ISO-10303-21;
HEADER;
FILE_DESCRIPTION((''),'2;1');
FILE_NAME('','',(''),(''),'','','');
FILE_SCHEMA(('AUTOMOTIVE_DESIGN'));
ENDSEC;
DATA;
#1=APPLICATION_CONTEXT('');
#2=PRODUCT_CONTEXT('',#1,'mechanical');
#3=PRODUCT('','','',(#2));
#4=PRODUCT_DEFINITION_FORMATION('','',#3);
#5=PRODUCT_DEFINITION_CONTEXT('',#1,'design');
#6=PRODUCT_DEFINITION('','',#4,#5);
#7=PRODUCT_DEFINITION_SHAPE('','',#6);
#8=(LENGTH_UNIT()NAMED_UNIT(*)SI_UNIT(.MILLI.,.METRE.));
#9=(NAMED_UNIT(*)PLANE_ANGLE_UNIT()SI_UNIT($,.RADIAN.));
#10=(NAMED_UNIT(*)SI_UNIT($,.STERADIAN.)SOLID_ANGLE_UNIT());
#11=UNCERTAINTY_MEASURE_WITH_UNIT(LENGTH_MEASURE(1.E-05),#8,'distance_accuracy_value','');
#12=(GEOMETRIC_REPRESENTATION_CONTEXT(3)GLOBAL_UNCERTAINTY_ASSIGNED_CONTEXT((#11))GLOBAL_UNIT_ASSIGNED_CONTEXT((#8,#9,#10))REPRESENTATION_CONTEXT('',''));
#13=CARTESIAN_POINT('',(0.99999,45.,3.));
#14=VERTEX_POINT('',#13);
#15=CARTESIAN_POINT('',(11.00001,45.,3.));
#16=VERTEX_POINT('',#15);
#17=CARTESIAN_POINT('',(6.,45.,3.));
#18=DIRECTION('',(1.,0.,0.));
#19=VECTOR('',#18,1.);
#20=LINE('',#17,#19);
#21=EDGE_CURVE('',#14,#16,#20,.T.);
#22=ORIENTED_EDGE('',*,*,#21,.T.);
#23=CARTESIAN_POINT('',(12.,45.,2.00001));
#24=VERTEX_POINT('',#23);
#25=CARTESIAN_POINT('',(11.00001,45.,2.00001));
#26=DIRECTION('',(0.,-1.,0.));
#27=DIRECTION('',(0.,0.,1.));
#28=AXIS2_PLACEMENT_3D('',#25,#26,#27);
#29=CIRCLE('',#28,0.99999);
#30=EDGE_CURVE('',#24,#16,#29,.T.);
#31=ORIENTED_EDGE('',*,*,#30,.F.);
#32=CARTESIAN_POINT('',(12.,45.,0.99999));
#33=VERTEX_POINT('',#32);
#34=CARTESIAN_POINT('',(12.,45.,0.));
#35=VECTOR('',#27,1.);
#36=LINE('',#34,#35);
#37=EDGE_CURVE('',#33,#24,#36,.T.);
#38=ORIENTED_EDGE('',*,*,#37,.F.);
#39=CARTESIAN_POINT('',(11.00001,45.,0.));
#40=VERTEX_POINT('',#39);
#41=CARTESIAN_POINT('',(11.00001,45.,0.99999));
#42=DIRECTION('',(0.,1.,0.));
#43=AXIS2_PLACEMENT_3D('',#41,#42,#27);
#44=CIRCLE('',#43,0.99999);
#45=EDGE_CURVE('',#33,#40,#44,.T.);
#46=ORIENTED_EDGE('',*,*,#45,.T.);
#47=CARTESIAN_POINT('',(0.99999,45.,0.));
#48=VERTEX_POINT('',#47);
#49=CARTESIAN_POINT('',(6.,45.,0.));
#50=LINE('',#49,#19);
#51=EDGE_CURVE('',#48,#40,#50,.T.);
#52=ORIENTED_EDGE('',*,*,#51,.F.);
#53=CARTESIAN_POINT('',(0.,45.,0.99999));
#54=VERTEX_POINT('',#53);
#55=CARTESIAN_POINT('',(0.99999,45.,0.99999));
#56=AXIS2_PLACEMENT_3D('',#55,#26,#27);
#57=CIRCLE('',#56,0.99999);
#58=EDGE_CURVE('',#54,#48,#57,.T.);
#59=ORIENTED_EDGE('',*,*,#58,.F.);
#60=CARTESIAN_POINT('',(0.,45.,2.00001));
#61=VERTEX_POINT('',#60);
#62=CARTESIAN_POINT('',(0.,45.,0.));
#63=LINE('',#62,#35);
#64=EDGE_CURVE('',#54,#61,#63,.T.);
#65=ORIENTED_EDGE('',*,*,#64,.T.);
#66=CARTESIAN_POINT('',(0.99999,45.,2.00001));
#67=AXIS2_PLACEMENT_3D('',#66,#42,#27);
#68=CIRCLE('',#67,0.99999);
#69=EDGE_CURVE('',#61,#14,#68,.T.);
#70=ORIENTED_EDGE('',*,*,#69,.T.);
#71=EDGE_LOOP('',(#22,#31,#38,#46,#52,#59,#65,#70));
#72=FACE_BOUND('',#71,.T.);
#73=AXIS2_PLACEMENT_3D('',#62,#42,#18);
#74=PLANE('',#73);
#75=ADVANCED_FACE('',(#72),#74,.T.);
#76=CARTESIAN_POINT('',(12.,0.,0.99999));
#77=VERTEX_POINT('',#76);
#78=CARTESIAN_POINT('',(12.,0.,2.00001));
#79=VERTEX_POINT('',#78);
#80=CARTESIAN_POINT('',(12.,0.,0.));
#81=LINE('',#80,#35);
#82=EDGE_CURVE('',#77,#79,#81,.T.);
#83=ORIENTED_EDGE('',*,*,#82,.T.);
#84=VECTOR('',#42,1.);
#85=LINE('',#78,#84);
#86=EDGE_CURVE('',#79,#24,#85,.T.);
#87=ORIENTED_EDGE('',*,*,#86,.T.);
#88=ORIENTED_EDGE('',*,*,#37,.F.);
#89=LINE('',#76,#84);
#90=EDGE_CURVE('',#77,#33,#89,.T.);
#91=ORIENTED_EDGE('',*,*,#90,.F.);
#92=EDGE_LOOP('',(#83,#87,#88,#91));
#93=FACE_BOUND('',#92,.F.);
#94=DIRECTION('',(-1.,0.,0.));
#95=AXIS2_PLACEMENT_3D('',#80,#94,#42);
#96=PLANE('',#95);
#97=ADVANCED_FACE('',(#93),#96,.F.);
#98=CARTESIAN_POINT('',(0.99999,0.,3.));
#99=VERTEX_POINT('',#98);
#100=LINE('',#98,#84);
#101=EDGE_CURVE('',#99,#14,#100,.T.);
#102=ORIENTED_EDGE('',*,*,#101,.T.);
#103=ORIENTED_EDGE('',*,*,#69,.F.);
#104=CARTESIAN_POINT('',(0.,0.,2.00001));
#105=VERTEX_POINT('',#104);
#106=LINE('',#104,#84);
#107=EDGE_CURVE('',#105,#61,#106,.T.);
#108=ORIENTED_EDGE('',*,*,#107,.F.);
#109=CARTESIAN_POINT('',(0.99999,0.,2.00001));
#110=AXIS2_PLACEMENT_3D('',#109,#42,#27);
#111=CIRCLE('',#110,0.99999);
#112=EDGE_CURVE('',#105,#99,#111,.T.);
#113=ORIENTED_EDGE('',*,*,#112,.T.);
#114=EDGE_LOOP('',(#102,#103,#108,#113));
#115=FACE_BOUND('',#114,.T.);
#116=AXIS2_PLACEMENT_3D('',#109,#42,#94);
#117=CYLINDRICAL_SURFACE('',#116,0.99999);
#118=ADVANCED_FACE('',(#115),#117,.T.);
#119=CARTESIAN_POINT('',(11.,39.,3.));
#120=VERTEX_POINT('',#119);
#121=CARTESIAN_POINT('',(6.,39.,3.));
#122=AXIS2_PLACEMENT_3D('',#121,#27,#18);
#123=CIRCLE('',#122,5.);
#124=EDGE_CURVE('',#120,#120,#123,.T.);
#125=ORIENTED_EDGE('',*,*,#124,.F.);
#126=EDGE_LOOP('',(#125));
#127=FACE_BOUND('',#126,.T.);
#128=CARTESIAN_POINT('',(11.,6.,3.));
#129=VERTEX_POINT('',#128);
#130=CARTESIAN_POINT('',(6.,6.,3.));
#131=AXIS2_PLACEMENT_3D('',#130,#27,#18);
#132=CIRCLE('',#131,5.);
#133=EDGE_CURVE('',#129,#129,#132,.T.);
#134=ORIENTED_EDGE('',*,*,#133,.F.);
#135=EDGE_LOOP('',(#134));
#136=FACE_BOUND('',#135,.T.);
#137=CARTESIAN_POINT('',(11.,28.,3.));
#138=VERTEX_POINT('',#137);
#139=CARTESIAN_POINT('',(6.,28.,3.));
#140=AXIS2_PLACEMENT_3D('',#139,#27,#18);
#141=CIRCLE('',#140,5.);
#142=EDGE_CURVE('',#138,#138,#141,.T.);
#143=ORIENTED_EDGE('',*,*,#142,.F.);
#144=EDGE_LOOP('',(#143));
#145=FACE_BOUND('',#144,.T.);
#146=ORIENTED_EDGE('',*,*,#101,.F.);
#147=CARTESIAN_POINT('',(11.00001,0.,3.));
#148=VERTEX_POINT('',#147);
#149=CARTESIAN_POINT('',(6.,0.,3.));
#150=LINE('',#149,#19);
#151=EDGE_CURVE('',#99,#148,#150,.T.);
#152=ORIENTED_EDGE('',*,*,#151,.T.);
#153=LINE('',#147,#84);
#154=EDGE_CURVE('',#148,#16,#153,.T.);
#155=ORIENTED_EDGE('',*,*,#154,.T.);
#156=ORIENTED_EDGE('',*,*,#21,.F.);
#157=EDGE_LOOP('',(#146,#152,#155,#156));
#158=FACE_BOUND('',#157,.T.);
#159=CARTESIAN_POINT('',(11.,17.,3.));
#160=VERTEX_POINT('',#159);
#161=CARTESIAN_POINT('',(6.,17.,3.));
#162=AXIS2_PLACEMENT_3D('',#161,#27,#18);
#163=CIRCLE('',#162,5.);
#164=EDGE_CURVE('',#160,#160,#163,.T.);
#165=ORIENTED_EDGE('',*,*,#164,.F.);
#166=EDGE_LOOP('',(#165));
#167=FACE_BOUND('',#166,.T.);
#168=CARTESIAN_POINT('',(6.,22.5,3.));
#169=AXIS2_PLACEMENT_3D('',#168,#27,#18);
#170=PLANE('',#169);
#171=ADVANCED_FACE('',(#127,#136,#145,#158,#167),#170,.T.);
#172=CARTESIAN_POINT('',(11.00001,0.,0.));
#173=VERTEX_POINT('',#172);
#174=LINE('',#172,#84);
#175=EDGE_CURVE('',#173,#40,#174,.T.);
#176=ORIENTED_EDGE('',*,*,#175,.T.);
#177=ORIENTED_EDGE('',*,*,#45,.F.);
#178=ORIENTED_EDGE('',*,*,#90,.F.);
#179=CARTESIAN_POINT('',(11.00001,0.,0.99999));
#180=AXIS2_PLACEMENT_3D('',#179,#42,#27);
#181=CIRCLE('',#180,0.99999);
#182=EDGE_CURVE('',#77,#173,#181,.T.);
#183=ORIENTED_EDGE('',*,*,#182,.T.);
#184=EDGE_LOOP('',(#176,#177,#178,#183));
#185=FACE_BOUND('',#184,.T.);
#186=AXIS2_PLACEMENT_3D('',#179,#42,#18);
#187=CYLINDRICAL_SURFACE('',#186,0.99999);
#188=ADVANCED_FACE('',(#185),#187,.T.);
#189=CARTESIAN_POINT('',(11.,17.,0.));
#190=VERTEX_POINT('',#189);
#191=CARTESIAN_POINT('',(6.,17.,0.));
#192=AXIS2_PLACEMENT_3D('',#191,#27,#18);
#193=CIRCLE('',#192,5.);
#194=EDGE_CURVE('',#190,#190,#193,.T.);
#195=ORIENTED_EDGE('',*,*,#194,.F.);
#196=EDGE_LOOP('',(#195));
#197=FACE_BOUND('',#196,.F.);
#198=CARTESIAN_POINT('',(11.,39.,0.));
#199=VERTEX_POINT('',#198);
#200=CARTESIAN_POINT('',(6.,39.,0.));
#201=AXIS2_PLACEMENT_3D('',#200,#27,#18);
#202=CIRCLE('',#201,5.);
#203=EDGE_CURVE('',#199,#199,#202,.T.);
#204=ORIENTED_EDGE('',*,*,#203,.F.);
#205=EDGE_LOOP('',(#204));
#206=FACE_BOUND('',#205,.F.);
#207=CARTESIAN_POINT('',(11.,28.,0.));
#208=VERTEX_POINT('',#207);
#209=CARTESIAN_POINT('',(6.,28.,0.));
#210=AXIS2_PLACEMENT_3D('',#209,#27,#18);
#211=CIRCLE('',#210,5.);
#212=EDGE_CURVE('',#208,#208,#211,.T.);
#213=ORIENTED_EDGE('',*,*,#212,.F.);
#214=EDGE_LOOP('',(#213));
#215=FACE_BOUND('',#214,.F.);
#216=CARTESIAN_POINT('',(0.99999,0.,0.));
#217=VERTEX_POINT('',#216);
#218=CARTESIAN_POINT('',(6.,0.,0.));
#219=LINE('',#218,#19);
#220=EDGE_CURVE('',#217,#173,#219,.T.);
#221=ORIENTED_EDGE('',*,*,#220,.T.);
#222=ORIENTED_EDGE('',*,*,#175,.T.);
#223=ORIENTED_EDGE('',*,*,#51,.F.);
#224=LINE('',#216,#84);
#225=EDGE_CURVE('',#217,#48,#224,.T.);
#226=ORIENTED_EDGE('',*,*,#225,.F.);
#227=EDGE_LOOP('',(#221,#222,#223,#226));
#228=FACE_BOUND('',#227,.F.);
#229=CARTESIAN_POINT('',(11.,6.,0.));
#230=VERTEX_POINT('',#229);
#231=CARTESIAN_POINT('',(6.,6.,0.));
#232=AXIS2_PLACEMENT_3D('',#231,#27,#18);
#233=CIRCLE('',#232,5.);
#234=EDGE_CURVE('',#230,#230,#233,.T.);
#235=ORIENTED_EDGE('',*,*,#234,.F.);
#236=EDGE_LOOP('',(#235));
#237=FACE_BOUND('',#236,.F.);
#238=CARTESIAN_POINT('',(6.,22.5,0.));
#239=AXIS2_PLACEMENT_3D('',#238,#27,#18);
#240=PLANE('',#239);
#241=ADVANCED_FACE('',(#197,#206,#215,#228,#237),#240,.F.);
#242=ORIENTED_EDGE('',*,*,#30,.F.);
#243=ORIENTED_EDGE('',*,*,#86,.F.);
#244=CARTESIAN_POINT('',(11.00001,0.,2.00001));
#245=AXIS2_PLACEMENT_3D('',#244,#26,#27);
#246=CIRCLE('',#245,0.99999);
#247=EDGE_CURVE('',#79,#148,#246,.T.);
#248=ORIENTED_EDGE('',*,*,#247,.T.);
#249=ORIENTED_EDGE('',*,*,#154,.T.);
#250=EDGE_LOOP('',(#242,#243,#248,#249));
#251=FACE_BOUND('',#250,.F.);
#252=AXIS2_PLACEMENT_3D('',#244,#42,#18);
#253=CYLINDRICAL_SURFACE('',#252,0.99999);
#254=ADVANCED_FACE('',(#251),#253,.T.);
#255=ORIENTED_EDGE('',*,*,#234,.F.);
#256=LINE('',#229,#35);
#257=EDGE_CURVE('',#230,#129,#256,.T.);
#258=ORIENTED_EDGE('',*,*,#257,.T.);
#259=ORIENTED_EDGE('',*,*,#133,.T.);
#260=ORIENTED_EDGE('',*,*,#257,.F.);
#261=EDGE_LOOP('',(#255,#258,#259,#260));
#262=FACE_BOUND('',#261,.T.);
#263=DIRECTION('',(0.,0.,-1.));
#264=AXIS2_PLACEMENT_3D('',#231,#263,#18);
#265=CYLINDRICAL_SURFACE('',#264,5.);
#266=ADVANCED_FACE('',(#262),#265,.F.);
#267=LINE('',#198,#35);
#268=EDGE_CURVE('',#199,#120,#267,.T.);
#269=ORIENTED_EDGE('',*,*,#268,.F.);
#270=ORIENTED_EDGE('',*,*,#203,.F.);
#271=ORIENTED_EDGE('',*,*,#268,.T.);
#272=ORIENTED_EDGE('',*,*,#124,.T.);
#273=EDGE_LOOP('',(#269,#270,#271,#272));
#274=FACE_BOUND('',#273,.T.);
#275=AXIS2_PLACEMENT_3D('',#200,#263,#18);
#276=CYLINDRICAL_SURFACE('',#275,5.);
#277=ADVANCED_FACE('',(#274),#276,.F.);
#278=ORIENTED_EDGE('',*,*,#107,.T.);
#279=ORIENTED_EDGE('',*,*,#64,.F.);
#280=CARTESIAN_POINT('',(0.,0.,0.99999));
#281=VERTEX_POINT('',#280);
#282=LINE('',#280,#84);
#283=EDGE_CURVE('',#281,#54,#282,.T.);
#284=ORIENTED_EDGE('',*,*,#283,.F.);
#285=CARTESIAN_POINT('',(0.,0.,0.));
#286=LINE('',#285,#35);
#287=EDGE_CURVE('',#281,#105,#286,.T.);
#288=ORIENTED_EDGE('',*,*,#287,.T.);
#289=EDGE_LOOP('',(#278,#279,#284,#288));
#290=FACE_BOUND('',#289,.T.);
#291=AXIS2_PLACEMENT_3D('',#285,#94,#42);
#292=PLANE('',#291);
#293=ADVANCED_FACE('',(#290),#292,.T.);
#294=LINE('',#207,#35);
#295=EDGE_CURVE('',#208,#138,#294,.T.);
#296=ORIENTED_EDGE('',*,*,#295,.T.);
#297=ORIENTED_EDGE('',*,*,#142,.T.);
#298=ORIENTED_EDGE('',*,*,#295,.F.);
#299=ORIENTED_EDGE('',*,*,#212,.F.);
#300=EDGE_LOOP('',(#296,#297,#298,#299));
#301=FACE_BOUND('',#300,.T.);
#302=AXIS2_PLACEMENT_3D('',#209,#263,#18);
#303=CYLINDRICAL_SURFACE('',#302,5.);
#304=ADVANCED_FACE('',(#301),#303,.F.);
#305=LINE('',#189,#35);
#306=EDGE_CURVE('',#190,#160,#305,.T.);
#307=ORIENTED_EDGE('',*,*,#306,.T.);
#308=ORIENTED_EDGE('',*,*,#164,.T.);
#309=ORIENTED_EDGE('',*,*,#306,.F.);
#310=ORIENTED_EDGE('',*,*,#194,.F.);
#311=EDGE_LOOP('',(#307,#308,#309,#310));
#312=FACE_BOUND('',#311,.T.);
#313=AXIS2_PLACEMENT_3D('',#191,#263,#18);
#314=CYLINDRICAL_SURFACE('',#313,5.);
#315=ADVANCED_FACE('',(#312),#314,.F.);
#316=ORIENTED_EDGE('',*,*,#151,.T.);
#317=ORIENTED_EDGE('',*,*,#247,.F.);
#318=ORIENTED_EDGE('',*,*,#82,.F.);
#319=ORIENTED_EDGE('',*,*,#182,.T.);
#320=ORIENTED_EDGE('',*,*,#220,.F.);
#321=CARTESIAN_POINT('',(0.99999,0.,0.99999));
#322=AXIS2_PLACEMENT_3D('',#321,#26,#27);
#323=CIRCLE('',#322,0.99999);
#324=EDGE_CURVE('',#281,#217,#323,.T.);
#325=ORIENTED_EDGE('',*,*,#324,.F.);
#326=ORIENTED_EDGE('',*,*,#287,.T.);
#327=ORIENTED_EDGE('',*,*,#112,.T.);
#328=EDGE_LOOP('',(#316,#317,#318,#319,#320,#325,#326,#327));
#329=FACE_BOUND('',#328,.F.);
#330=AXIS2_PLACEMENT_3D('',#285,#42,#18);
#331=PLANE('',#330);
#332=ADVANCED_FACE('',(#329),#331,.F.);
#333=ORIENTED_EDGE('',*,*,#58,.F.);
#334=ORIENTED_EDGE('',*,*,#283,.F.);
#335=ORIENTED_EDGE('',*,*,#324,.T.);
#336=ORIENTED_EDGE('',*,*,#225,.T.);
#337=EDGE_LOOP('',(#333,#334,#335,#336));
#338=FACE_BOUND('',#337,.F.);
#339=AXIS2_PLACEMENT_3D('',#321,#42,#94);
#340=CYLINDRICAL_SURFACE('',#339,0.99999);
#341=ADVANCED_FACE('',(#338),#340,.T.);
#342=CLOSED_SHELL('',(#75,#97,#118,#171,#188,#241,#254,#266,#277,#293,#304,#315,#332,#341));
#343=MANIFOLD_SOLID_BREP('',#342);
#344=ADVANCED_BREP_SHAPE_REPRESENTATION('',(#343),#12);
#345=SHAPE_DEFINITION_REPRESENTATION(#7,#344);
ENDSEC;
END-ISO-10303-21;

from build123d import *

# Parameters (mm, degrees)
F0_W     = 12
F0_H     = 45
F0_R     = 5
F1_DEPTH = 3
F2_R     = 0.99999


# Not quite as in the source:
# - a fillet or chamfer is up to 0.001 mm smaller than in the source, because OpenCascade refuses the exact size


with BuildPart() as f1:
    # F0 (on Top) → F1 (new body)
    with BuildSketch(Plane.XY):
        with Locations((6, 22.5)):
            Rectangle(F0_W, F0_H)
        with Locations((6, 6)):
            Circle(F0_R, mode=Mode.SUBTRACT)
        with Locations((6, 17)):
            Circle(F0_R, mode=Mode.SUBTRACT)
        with Locations((6, 28)):
            Circle(F0_R, mode=Mode.SUBTRACT)
        with Locations((6, 39)):
            Circle(F0_R, mode=Mode.SUBTRACT)
    extrude(amount=F1_DEPTH)

    # F2 (radius 1 in the source; OpenCascade refuses exactly that, so slightly less here)
    f2_edges = [f1.edges().sort_by_distance(p)[0] for p in [
        (12, 22.5, 3),
        (12, 22.5, 0),
        (0, 22.5, 3),
        (0, 22.5, 0),
    ]]
    fillet(f2_edges, radius=F2_R)


solid = f1.part
